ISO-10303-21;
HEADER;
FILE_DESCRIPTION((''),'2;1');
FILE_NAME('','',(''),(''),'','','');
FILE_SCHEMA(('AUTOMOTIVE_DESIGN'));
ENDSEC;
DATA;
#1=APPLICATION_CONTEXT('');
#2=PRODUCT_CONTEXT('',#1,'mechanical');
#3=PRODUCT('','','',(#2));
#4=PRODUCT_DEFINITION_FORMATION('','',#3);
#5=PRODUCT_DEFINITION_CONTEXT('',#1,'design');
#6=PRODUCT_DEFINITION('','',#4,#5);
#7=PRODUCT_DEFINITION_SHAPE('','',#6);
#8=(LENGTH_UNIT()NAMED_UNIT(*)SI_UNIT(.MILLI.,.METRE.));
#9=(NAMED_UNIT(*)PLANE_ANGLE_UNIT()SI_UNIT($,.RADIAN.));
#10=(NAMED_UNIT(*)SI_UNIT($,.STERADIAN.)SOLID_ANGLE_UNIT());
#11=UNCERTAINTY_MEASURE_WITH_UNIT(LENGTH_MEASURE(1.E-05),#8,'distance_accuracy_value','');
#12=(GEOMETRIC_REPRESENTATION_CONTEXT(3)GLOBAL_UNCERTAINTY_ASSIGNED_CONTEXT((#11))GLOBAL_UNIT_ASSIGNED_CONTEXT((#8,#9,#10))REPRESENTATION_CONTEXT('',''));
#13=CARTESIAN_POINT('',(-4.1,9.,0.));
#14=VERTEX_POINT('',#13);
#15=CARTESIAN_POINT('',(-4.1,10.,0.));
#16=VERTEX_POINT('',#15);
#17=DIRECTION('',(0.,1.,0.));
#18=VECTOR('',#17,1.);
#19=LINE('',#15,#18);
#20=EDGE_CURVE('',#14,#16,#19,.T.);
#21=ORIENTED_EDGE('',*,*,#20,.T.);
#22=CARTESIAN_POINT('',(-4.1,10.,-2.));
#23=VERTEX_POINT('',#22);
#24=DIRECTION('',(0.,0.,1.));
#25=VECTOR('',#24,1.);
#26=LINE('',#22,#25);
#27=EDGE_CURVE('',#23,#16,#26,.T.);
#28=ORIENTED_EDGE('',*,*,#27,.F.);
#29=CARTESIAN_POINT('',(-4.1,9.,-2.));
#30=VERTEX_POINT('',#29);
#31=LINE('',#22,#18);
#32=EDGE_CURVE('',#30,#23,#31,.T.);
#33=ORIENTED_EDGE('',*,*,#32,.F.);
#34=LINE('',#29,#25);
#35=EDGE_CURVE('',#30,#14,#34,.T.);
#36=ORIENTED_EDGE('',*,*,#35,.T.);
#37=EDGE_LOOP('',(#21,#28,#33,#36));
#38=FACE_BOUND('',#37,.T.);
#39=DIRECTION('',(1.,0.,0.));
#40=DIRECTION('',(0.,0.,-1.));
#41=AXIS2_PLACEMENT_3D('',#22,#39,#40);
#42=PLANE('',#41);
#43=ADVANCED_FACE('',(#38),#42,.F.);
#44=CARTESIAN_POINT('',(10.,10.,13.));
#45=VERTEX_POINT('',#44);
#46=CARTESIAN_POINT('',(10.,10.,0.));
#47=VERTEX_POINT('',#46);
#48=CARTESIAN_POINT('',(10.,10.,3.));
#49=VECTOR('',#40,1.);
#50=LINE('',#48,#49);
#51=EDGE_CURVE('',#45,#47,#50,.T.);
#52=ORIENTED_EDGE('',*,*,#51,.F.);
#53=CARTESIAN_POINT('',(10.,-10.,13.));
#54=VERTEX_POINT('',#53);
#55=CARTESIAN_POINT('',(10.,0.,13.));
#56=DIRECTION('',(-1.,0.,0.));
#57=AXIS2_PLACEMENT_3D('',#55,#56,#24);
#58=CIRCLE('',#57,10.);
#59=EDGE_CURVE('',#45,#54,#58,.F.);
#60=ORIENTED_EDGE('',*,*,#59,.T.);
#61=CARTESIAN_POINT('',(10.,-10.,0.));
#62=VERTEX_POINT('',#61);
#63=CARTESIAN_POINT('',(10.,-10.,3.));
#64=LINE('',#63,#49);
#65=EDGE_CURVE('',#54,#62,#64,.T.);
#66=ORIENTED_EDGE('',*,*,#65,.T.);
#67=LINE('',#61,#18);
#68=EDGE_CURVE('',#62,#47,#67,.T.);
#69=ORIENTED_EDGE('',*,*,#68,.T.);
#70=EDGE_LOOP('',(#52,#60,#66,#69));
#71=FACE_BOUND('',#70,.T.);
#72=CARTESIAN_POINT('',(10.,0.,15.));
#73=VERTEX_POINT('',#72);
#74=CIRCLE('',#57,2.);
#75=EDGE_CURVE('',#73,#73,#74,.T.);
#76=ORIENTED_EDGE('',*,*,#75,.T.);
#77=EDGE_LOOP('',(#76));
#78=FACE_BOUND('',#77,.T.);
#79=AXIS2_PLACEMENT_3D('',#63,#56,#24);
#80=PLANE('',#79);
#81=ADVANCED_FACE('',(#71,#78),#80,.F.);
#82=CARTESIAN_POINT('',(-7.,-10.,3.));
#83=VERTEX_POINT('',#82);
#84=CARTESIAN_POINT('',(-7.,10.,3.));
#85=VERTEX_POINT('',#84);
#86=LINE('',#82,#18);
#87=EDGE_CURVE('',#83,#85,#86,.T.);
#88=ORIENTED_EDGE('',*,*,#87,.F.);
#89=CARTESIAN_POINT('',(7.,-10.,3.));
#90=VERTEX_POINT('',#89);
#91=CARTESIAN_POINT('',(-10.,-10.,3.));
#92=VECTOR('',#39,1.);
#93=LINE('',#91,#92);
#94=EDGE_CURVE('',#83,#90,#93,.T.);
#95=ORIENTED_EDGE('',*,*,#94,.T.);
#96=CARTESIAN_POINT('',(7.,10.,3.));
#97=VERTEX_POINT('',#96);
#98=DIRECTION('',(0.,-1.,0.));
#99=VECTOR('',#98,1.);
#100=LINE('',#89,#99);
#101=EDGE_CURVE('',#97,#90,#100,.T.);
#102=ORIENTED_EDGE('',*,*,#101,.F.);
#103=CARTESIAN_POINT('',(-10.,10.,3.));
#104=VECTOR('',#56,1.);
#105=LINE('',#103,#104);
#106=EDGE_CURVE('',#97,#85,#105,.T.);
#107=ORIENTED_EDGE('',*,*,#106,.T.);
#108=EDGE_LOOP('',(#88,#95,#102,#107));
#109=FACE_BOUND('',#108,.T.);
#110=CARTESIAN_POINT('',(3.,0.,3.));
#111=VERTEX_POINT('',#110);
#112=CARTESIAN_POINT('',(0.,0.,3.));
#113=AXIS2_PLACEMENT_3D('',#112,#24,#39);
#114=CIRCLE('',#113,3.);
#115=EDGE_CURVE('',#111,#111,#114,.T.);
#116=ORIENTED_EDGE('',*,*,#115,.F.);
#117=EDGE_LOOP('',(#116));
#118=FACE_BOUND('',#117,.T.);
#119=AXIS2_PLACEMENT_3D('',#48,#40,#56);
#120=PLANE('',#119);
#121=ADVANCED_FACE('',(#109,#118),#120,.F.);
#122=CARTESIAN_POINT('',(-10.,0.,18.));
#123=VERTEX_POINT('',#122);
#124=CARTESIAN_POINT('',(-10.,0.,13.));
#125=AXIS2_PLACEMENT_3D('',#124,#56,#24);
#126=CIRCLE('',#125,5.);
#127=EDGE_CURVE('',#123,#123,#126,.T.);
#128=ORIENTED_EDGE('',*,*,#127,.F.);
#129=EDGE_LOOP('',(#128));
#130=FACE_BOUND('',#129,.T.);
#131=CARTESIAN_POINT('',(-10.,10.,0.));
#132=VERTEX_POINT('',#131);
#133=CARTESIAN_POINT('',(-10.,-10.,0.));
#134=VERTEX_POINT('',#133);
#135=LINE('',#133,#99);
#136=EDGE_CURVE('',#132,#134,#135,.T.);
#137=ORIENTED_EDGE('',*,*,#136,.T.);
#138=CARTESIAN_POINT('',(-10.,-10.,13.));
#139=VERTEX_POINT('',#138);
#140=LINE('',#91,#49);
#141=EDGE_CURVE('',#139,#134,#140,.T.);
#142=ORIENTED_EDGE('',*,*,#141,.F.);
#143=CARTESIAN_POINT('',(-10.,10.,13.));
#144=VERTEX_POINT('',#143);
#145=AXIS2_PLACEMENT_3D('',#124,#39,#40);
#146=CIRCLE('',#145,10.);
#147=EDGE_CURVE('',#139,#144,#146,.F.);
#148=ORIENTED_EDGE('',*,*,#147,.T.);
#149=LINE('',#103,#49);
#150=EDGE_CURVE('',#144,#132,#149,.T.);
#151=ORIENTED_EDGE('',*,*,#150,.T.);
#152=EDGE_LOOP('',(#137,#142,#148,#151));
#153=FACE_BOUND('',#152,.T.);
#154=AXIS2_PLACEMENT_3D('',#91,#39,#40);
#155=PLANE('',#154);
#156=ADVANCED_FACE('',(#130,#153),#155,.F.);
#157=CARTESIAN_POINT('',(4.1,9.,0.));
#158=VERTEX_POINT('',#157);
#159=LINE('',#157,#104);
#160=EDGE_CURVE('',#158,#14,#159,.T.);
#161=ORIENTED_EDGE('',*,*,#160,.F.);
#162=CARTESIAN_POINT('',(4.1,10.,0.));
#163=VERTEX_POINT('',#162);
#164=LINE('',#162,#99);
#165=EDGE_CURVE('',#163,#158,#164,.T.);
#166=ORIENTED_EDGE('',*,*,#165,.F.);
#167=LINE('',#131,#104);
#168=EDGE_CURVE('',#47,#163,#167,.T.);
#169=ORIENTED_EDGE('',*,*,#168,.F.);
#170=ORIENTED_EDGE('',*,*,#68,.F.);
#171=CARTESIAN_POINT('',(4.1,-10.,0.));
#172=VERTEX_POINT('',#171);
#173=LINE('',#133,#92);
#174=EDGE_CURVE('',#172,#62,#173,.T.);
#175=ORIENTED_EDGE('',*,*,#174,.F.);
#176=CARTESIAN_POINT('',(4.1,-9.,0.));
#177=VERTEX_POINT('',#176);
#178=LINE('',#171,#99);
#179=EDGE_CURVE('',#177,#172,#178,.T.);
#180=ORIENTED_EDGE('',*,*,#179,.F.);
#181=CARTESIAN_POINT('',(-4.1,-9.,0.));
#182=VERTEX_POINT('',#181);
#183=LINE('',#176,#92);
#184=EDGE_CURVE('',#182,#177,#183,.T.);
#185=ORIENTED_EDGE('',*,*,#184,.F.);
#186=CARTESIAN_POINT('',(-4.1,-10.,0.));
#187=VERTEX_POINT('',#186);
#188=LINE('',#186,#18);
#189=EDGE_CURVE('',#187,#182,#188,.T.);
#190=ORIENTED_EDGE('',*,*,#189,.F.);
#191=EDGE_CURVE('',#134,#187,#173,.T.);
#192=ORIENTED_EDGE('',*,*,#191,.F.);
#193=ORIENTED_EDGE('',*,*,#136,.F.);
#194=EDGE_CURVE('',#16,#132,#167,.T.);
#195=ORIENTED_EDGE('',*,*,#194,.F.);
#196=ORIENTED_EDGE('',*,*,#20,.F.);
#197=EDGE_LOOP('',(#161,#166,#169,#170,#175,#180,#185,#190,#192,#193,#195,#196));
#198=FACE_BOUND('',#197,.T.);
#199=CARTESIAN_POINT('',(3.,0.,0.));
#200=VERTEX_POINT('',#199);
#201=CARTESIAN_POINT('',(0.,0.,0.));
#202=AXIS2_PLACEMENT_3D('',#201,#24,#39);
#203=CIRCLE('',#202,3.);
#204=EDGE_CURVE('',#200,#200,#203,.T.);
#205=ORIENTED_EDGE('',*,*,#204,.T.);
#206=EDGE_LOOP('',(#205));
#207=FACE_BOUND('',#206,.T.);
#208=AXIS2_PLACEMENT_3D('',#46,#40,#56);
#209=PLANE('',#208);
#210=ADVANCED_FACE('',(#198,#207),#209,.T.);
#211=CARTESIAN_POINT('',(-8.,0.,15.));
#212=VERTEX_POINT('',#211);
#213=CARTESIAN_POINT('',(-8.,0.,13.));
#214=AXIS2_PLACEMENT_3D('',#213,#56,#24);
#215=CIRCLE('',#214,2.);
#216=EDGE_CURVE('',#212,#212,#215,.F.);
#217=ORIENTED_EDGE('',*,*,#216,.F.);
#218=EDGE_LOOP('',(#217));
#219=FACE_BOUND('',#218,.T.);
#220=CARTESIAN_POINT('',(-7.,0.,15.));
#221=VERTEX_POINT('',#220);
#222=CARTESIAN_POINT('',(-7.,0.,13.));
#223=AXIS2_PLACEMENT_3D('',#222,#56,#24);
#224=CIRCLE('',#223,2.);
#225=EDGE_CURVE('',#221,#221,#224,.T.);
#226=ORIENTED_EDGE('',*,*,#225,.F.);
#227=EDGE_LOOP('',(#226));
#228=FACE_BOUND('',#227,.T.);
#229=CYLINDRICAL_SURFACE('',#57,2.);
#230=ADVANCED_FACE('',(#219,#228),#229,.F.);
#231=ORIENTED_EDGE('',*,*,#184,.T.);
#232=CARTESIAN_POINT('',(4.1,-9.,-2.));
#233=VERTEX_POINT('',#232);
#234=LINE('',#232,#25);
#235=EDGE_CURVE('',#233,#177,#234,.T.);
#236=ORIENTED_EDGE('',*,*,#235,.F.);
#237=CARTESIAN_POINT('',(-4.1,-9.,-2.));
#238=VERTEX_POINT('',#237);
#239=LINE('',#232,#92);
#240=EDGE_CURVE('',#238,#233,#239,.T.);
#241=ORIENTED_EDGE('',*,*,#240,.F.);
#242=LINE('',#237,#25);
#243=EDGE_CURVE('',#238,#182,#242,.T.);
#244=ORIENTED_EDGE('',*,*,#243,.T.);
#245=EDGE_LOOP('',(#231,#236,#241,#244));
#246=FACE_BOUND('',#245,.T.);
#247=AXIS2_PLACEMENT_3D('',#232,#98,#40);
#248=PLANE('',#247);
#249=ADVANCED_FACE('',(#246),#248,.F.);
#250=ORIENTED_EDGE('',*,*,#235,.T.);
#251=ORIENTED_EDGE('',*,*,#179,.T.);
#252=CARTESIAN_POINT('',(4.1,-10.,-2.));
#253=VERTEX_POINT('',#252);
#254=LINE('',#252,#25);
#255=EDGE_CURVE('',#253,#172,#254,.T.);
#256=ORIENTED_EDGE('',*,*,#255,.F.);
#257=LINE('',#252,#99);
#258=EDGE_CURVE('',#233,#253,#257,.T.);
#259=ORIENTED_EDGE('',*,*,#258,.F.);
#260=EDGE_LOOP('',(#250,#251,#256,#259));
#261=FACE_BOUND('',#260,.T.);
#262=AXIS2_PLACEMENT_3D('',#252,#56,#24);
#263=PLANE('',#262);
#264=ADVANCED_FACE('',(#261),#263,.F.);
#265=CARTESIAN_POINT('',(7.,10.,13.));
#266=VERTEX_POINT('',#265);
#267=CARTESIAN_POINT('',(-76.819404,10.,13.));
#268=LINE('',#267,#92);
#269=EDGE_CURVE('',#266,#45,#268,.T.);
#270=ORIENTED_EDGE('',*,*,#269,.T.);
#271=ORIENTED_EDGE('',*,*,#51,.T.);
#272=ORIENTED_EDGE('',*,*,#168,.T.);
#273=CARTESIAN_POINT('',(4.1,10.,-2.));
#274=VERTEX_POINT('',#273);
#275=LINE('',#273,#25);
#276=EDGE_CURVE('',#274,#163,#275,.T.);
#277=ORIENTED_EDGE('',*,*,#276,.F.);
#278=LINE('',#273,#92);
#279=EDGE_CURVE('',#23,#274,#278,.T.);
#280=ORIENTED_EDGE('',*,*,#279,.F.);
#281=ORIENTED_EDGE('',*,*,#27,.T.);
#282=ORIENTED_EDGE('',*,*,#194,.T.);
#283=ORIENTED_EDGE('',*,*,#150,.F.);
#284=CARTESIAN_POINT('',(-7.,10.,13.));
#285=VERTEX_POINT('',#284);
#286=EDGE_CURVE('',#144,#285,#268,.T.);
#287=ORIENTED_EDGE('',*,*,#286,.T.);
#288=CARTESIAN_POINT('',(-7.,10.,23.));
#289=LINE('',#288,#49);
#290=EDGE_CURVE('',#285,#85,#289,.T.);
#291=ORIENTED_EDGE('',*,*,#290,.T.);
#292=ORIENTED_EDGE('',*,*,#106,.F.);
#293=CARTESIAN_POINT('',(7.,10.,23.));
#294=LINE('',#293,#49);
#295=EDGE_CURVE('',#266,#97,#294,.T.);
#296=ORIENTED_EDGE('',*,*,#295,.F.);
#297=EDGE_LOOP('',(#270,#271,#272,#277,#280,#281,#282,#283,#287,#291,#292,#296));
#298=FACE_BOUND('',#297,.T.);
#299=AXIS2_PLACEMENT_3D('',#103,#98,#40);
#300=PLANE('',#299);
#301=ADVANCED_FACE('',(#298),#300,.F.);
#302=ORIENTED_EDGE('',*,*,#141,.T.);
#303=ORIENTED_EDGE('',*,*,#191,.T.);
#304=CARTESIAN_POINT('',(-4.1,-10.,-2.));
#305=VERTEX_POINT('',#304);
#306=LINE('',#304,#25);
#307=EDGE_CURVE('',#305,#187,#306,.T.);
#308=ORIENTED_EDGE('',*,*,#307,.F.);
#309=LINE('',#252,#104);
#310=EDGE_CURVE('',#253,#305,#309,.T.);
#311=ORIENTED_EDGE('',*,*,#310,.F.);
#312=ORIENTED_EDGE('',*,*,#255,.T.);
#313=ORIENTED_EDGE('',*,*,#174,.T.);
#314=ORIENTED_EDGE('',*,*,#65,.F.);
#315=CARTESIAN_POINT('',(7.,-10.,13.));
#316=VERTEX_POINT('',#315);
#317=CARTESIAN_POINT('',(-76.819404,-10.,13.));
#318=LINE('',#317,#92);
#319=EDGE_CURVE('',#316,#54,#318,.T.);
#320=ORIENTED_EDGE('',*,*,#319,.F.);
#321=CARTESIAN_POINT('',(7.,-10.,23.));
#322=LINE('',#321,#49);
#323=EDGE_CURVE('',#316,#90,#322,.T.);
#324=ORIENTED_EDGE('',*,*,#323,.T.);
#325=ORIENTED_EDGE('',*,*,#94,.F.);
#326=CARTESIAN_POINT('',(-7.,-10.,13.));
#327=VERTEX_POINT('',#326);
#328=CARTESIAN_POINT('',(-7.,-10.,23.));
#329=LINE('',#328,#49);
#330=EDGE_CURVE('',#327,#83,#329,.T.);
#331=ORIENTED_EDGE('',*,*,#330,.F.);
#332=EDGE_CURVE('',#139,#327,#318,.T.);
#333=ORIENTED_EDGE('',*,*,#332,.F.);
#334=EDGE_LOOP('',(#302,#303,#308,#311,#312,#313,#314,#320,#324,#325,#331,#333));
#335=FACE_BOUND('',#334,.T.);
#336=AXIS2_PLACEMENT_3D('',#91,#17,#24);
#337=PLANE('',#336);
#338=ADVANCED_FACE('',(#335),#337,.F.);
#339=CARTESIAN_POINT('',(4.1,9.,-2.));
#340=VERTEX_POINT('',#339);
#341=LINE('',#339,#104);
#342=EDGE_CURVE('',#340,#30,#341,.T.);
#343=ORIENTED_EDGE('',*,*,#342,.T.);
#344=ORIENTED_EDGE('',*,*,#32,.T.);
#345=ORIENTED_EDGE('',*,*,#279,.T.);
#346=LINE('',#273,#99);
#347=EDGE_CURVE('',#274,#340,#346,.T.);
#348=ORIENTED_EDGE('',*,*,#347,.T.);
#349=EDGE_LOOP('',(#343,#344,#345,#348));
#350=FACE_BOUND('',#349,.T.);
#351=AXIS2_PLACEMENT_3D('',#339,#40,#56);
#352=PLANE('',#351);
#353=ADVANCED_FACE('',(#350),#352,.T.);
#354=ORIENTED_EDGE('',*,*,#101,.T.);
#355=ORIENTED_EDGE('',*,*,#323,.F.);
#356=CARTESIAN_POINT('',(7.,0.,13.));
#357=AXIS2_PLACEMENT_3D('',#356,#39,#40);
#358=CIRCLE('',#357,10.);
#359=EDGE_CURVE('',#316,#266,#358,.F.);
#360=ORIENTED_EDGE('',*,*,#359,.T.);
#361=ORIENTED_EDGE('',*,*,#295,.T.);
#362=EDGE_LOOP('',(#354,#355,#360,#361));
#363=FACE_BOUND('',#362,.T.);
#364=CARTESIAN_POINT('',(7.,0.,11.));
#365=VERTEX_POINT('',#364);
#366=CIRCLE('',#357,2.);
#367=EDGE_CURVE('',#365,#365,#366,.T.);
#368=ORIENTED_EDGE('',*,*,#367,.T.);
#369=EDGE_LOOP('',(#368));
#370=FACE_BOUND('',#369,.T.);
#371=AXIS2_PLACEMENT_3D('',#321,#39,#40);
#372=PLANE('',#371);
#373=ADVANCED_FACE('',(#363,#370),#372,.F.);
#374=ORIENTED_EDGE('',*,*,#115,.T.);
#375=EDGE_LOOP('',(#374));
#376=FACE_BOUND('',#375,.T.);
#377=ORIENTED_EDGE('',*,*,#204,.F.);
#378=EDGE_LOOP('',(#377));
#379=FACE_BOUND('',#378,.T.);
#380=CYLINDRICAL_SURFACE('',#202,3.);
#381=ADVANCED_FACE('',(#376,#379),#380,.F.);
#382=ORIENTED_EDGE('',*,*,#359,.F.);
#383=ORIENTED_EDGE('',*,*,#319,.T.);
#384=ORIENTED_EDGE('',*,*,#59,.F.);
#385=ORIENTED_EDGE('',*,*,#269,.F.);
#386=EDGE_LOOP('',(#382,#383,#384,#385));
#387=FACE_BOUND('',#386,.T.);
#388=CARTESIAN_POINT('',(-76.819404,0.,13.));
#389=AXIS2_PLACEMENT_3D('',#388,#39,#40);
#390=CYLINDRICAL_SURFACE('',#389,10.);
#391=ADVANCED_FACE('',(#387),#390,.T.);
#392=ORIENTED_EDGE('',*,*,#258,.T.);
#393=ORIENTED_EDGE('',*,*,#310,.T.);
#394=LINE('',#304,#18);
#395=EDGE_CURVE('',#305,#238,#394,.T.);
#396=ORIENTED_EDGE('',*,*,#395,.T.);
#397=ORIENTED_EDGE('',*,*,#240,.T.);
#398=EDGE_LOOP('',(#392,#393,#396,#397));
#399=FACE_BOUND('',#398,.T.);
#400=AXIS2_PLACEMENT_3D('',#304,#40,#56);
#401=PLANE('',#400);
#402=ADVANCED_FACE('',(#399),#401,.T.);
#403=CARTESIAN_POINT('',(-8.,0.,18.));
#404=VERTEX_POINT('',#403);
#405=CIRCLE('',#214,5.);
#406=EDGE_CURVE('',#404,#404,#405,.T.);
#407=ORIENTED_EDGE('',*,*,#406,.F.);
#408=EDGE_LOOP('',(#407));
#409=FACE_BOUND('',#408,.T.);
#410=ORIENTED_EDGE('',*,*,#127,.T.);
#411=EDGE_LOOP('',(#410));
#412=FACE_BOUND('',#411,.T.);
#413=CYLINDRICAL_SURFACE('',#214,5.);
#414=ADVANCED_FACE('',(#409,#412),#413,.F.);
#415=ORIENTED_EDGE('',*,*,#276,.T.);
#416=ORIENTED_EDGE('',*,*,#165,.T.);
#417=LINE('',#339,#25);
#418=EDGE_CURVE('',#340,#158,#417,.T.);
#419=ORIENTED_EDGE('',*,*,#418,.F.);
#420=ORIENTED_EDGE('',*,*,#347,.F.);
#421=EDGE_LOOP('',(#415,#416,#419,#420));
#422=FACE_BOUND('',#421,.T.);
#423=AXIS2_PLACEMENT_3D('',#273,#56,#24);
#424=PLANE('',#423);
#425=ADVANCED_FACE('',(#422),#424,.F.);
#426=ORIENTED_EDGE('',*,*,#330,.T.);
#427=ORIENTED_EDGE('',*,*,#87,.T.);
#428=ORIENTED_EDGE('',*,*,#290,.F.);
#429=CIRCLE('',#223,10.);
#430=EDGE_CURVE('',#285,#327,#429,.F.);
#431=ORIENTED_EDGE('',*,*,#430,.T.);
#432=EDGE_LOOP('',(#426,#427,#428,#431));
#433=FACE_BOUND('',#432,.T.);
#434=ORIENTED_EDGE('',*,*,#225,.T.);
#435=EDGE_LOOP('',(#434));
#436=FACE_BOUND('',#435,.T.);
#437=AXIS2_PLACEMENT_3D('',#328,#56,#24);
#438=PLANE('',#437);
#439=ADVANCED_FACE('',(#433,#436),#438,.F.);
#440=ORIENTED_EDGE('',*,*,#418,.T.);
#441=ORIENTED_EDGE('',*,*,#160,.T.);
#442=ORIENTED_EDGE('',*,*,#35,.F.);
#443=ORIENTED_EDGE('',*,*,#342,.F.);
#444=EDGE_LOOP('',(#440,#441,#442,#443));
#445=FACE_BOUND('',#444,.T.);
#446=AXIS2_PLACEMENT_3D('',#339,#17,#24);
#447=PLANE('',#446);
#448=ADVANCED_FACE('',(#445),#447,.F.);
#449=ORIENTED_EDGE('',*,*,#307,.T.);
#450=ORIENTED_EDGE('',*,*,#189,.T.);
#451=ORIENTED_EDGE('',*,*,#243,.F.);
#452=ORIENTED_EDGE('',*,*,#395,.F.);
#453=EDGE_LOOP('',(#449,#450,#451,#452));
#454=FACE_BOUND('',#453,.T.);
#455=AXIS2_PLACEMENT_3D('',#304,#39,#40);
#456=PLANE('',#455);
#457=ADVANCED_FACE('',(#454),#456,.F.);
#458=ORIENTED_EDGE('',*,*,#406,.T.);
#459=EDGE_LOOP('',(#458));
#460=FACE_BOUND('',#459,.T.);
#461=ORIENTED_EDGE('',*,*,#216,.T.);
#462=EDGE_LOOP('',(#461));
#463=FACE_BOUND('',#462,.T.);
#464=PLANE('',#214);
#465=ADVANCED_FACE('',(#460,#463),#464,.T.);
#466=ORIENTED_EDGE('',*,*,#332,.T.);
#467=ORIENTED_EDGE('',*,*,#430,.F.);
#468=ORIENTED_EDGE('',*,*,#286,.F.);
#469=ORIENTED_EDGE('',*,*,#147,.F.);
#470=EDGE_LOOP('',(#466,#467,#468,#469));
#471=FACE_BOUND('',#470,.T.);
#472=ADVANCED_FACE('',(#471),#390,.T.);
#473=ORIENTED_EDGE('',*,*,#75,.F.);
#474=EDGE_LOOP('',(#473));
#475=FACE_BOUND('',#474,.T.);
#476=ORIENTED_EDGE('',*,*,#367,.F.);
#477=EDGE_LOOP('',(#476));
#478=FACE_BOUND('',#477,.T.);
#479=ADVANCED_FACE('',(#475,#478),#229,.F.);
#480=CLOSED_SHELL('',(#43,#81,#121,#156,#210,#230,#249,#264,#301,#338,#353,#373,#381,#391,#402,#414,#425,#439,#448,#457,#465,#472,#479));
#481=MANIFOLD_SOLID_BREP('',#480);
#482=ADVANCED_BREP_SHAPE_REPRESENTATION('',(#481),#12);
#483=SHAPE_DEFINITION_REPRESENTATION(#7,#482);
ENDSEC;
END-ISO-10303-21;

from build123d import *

# Parameters (mm, degrees)
SKETCH_1_W          = 20
SKETCH_1_H          = 20
EXTRUDE_1_DEPTH     = 3
SKETCH_2_W          = 3
SKETCH_2_H          = 20
EXTRUDE_2_DEPTH     = 20
CUT_EXTRUDE_START   = -20
CUT_EXTRUDE_2_DEPTH = 20
SKETCH_4_R          = 2
CUT_EXTRUDE_3_DEPTH = 33.078029865
SKETCH_5_R          = 5
CUT_EXTRUDE_4_DEPTH = 2
SKETCH_6_R          = 3
CUT_EXTRUDE_5_DEPTH = 25.494897428
SKETCH_7_W          = 8.2
SKETCH_7_H          = 1
EXTRUDE_3_DEPTH     = 2


# Read off the part's stored shape, not the designer's step: 切除-拉伸2
with BuildPart() as part:
    # 草图1 → 凸台-拉伸1 (new body)
    with BuildSketch(Plane.XY):
        Rectangle(SKETCH_1_W, SKETCH_1_H)
    extrude(amount=EXTRUDE_1_DEPTH)

    # 草图2 → 凸台-拉伸2 (add)
    with BuildSketch(Plane.XY.offset(3)):
        with Locations((-8.5, 0)):
            Rectangle(SKETCH_2_W, SKETCH_2_H)
        with Locations((8.5, 0)):
            Rectangle(SKETCH_2_W, SKETCH_2_H)
    extrude(amount=EXTRUDE_2_DEPTH)

    # 切除-拉伸2 outline → 切除-拉伸2 (cut)
    with BuildSketch(Plane.ZY.offset(10).offset(CUT_EXTRUDE_START)):
        with BuildLine():
            Line((23, 10), (13, 10))
            ThreePointArc((13, 10), (20.071067812, 7.071067812), (23, 0))
            Line((23, 0), (23, 10))
        make_face()
        with BuildLine():
            Line((23, -10), (23, 0))
            ThreePointArc((23, 0), (20.071067812, -7.071067812), (13, -10))
            Line((13, -10), (23, -10))
        make_face()
    extrude(amount=CUT_EXTRUDE_2_DEPTH, mode=Mode.SUBTRACT)

    # 草图4 → 切除-拉伸3 (cut, through all)
    with BuildSketch(Plane.ZY.offset(10)):
        with Locations((13, 0)):
            Circle(SKETCH_4_R)
    extrude(amount=-CUT_EXTRUDE_3_DEPTH, mode=Mode.SUBTRACT)

    # 草图5 → 切除-拉伸4 (cut)
    with BuildSketch(Plane.ZY.offset(10)):
        with Locations((13, 0)):
            Circle(SKETCH_5_R)
    extrude(amount=-CUT_EXTRUDE_4_DEPTH, mode=Mode.SUBTRACT)

    # 草图6 → 切除-拉伸5 (cut, through all)
    with BuildSketch(Plane.XY.offset(3)):
        Circle(SKETCH_6_R)
    extrude(amount=-CUT_EXTRUDE_5_DEPTH, mode=Mode.SUBTRACT)

    # 草图7 → 凸台-拉伸3 (add)
    with BuildSketch(Plane(origin=(0, 0, 0), x_dir=(-1, 0, 0), z_dir=(0, 0, -1))):
        with Locations((0, 9.5)):
            Rectangle(SKETCH_7_W, SKETCH_7_H)
        with Locations((0, -9.5)):
            Rectangle(SKETCH_7_W, SKETCH_7_H)
    extrude(amount=EXTRUDE_3_DEPTH)


solid = part.part
